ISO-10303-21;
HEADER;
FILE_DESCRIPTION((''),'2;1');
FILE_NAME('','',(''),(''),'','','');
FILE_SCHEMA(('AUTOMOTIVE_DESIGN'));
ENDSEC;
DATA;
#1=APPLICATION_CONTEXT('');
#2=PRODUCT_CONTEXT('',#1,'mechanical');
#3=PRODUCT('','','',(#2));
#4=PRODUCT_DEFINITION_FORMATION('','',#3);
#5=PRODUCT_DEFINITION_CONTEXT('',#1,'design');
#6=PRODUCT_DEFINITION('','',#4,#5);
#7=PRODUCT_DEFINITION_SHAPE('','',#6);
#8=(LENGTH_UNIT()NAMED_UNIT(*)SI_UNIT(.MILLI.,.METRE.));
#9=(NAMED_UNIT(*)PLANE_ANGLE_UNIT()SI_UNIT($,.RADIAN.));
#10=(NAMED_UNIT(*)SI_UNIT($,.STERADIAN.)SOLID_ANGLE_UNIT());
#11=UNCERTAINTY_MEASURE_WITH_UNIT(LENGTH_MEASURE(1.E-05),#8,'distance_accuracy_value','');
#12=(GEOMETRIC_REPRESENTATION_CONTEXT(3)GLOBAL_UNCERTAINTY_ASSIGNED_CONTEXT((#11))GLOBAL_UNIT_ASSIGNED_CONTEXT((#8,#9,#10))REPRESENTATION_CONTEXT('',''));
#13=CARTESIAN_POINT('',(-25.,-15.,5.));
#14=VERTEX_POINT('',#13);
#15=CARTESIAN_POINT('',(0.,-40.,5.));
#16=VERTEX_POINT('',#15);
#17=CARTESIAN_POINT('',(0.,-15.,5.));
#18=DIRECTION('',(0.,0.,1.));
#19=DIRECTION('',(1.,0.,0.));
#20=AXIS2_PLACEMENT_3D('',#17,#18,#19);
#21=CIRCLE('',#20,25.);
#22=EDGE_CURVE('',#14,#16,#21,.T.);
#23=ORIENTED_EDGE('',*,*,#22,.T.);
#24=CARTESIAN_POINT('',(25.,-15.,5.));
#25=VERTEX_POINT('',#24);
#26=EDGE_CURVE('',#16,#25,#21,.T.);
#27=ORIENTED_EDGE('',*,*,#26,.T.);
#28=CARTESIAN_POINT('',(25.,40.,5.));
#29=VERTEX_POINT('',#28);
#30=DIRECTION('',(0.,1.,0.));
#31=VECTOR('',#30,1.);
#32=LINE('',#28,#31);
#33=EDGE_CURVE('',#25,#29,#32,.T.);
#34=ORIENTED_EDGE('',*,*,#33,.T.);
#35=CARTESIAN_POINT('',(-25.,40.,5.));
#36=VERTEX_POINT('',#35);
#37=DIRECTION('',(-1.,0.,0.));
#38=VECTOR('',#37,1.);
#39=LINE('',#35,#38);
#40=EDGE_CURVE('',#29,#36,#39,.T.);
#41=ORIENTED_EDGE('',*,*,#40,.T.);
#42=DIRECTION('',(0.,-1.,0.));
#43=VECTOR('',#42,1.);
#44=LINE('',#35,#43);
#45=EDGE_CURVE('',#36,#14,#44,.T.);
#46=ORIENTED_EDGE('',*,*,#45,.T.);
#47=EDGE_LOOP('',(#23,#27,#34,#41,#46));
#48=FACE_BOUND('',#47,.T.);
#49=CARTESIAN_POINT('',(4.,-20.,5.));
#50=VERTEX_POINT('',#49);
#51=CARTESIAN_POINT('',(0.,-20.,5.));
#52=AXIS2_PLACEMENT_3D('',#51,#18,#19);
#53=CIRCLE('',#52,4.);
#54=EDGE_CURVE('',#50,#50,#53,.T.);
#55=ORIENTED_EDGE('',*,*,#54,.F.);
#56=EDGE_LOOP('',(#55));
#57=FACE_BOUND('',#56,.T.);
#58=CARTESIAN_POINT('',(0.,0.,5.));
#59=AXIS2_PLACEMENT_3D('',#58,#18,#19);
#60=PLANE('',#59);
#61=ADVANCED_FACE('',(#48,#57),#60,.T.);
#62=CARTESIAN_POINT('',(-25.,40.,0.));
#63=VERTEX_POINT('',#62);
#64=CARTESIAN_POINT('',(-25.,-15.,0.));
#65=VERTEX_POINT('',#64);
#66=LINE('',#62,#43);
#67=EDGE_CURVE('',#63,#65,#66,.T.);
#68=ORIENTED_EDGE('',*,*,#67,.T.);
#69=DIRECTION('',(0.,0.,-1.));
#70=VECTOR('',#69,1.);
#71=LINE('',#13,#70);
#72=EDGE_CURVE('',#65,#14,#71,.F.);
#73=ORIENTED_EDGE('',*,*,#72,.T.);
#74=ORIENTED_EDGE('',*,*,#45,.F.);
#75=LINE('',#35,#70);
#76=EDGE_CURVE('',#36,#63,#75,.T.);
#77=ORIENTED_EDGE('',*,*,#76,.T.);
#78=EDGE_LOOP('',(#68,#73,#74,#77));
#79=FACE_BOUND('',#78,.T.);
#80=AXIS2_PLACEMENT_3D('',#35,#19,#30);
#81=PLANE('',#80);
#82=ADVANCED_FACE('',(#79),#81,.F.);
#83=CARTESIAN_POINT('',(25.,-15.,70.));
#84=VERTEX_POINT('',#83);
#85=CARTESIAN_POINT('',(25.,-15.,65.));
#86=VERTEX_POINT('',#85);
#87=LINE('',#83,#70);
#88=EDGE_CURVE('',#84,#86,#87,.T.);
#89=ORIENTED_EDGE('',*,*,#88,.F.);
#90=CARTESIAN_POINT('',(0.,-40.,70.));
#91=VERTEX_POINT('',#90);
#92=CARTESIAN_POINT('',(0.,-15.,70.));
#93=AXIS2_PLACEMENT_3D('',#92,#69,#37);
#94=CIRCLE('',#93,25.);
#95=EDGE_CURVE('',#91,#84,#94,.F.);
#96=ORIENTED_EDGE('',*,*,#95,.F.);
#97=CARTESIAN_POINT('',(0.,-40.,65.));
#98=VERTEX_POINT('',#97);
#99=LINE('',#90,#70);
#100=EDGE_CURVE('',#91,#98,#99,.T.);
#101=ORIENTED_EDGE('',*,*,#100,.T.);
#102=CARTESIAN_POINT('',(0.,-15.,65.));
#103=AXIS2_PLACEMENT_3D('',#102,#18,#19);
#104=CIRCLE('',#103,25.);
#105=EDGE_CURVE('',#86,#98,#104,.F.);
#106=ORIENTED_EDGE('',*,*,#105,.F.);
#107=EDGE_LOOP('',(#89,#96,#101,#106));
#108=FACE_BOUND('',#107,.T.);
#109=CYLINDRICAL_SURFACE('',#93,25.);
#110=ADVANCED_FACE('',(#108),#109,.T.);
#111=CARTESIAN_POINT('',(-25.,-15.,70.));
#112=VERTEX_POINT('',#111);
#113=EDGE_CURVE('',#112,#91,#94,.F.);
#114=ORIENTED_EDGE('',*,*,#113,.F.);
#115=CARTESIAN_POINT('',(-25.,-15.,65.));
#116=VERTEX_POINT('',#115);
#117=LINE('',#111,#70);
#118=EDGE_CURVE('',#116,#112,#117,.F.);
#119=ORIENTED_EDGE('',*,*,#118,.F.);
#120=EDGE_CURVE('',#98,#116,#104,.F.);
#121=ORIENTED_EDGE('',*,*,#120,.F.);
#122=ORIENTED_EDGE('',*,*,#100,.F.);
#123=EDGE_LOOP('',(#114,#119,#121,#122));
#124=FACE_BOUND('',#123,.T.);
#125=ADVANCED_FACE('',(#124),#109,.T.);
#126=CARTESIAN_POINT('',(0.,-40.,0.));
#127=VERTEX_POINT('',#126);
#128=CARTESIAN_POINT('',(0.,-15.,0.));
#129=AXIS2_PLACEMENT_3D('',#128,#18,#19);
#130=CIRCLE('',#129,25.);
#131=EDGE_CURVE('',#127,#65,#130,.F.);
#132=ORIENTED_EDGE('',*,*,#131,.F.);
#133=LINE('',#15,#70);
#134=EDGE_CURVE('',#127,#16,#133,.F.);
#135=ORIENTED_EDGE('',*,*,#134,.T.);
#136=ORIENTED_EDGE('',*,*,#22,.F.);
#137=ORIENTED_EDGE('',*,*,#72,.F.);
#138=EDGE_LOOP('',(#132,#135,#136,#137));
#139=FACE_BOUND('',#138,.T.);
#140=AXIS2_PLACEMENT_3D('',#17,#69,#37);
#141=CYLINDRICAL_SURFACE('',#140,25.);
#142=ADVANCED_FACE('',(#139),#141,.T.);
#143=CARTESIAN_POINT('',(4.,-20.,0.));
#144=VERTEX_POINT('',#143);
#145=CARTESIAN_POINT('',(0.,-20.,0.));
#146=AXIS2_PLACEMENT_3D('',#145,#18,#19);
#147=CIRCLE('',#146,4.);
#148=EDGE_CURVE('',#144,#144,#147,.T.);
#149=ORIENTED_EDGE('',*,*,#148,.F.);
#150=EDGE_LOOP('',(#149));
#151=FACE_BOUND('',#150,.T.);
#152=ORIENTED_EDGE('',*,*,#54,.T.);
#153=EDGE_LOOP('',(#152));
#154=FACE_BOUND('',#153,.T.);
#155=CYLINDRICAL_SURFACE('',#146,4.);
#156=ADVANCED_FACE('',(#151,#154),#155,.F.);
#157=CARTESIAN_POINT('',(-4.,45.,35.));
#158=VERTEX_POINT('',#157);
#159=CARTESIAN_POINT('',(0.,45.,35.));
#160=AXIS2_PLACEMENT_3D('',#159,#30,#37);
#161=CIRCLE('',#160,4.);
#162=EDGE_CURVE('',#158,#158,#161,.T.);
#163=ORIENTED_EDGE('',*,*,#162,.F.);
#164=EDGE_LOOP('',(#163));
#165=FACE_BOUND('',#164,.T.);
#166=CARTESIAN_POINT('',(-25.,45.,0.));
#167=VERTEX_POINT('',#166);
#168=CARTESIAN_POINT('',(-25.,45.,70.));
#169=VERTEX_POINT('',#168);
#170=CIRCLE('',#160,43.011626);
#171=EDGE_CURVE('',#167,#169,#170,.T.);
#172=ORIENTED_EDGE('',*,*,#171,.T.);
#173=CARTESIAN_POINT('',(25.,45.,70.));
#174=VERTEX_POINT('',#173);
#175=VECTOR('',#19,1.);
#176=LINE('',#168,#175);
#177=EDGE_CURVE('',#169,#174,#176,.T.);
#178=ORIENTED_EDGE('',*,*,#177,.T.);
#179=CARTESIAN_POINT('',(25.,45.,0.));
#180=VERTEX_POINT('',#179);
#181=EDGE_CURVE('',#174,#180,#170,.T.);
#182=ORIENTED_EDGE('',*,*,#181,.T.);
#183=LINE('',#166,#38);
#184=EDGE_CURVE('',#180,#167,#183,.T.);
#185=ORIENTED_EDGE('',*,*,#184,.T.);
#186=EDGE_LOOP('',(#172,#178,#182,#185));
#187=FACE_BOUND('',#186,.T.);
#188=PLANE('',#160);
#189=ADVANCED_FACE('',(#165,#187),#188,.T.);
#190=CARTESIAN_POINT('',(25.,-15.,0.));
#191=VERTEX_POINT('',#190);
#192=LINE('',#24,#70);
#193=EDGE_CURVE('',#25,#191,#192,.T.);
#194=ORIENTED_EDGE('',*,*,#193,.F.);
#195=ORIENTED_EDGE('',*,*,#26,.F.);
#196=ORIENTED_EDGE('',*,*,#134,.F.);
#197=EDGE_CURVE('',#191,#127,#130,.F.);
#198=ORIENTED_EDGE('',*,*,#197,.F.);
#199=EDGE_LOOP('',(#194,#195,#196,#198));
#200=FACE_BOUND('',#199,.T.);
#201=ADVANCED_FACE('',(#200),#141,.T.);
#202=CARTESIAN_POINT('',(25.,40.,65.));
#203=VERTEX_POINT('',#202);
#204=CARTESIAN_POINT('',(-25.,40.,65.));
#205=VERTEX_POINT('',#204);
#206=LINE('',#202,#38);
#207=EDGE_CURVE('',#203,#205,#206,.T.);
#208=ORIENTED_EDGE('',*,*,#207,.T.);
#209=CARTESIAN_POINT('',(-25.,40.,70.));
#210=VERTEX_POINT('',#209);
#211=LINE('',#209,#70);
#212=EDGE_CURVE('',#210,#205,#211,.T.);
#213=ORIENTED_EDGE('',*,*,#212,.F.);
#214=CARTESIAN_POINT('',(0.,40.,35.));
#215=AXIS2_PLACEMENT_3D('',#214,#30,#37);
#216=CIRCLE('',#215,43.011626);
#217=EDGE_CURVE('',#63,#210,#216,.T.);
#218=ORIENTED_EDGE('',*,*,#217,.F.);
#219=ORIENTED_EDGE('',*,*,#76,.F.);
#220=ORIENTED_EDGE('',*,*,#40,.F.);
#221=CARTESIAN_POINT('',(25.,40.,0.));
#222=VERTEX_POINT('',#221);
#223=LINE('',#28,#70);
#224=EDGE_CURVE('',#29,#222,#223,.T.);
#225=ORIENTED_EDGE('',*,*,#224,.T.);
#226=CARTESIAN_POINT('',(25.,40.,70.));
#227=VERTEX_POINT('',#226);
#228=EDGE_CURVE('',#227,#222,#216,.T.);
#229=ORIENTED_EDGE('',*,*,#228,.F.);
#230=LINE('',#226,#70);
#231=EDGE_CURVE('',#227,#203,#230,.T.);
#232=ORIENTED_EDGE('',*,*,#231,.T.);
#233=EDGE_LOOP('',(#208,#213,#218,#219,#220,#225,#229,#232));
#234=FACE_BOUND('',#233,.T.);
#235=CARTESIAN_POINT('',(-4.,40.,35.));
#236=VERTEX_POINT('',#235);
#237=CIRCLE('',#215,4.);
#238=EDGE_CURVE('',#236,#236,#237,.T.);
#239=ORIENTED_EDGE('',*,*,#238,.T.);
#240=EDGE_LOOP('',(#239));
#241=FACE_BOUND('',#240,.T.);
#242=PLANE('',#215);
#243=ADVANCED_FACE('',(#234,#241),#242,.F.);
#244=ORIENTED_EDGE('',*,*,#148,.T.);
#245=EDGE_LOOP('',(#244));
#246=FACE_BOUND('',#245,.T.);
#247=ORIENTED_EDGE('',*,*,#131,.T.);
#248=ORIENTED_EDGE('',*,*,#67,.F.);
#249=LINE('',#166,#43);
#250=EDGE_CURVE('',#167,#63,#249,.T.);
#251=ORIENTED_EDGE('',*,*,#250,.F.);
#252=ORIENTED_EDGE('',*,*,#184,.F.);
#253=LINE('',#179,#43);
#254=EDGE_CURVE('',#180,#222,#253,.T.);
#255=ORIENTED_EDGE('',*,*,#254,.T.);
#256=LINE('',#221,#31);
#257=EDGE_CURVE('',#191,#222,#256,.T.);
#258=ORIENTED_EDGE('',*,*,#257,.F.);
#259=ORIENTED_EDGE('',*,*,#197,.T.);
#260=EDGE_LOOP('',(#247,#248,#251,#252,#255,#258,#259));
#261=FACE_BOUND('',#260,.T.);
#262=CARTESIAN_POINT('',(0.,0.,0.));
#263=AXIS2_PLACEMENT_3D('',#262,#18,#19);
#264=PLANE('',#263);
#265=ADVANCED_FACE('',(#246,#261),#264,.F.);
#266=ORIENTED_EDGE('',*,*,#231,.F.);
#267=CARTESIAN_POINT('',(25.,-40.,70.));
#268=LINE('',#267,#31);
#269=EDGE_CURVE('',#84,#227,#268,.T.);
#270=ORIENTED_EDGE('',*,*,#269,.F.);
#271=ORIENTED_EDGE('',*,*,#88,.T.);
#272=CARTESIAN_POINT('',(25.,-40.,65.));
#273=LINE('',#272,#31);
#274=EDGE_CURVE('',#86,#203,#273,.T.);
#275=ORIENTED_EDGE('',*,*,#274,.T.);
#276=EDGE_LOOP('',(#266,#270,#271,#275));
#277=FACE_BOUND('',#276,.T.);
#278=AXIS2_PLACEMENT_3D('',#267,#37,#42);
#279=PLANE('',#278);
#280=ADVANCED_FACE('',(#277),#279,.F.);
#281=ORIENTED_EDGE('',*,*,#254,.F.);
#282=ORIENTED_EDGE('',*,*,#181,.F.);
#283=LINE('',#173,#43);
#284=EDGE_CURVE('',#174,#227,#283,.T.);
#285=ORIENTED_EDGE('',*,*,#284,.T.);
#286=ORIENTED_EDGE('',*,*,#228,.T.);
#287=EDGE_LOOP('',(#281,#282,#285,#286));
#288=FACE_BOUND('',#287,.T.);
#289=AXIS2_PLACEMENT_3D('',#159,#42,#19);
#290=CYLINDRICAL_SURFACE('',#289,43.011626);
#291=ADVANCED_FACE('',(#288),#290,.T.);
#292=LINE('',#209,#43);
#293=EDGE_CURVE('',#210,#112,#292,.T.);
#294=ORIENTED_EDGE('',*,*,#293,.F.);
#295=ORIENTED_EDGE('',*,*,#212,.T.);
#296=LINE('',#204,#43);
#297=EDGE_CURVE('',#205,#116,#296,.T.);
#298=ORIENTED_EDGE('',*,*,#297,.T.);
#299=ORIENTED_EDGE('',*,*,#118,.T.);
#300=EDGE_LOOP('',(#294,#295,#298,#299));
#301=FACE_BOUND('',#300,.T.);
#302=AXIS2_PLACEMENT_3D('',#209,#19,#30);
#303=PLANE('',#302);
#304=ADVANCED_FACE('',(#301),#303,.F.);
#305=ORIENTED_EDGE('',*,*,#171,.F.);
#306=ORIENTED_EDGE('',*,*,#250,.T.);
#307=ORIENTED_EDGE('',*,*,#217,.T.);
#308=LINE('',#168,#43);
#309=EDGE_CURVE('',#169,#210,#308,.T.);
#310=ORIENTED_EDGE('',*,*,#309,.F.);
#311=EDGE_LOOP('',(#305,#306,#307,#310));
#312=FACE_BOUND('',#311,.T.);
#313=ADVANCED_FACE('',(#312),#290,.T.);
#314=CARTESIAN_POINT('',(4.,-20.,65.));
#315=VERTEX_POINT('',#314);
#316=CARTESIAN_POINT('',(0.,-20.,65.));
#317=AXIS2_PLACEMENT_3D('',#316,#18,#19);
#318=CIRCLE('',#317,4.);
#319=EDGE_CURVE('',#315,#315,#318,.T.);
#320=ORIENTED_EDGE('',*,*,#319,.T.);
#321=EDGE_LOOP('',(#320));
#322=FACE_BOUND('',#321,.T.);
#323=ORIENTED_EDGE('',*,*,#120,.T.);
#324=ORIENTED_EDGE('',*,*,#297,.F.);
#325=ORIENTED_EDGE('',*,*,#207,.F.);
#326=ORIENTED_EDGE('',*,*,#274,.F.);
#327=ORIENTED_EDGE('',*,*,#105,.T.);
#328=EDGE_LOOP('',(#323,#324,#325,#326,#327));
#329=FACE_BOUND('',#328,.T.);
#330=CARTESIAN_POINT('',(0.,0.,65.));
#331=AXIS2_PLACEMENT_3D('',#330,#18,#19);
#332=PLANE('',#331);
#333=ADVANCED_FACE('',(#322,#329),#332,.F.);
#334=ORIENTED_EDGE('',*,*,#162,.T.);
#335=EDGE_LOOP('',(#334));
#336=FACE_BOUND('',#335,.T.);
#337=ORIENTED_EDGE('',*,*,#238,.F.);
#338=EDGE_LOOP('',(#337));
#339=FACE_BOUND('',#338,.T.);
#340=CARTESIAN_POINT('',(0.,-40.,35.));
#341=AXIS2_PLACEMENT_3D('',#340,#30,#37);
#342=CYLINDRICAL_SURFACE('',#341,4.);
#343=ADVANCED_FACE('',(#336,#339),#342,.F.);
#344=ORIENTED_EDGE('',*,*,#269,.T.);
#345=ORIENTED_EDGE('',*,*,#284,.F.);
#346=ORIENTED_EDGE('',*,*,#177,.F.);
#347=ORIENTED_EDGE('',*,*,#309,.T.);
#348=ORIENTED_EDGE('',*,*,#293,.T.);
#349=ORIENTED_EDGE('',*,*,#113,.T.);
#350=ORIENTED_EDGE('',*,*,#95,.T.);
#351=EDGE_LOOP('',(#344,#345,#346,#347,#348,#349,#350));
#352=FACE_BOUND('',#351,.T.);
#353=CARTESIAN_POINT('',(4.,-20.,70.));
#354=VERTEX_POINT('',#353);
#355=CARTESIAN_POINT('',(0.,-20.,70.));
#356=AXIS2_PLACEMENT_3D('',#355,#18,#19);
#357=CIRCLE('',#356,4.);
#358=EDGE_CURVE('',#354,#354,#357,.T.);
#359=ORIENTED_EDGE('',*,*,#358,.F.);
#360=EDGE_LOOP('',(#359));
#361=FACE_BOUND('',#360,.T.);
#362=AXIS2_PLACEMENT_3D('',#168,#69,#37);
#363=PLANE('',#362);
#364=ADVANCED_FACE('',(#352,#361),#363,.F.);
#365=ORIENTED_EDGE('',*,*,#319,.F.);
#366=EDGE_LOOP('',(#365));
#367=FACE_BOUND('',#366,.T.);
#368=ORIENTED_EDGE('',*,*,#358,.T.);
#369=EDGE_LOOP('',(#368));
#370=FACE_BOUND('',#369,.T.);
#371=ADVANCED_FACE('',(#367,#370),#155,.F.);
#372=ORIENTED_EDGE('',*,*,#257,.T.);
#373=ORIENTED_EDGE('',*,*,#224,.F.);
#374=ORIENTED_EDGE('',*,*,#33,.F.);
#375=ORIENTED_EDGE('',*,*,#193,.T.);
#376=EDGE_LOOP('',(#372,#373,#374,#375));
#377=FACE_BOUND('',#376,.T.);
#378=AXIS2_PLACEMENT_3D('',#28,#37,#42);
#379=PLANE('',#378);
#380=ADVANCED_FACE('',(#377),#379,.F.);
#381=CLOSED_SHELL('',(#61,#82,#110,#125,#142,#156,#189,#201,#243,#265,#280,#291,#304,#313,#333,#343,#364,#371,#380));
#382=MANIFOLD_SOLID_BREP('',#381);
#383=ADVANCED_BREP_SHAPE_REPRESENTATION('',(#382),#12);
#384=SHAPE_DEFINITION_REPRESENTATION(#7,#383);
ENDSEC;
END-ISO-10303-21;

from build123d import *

# Parameters (mm, degrees)
SKETCH_1_W          = 50
SKETCH_1_H          = 80
EXTRUDE_1_DEPTH     = 5
SKETCH_2_W          = 50
SKETCH_2_H          = 80
EXTRUDE_2_DEPTH     = 5
EXTRUDE_3_DEPTH     = 5
SKETCH_4_R          = 4
CUT_EXTRUDE_1_DEPTH = 94.674969976
SKETCH_5_R          = 4
CUT_EXTRUDE_2_DEPTH = 119.215904175
FILLET_1_R          = 25


with BuildPart() as part:
    # 草图1 → 凸台-拉伸1 (new body)
    with BuildSketch(Plane.XY):
        Rectangle(SKETCH_1_W, SKETCH_1_H)
    extrude(amount=EXTRUDE_1_DEPTH)



with BuildPart() as body_2:
    # 草图2 → 凸台-拉伸2 (new body)
    with BuildSketch(Plane.XY.offset(65)):
        Rectangle(SKETCH_2_W, SKETCH_2_H)
    extrude(amount=EXTRUDE_2_DEPTH)


with BuildPart() as part_1:
    add(part.part)

    add(body_2.part)  # 凸台-拉伸3 merges body 2
    # 草图3 → 凸台-拉伸3 (add)
    with BuildSketch(Plane(origin=(0, 40, 0), x_dir=(1, 0, 0), z_dir=(0, 1, 0))):
        with BuildLine():
            Line((-25, 0), (25, 0))
            ThreePointArc((25, 0), (43.011626335, -35), (25, -70))
            Line((25, -70), (-25, -70))
            ThreePointArc((-25, -70), (-43.011626335, -35), (-25, 0))
        make_face()
    extrude(amount=EXTRUDE_3_DEPTH)

    # 草图4 → 切除-拉伸1 (cut, through all)
    with BuildSketch(Plane.XY.offset(70)):
        with Locations((0, -20)):
            Circle(SKETCH_4_R)
    extrude(amount=-CUT_EXTRUDE_1_DEPTH, mode=Mode.SUBTRACT)

    # 草图5 → 切除-拉伸2 (cut, through all)
    with BuildSketch(Plane(origin=(0, 45, 0), x_dir=(1, 0, 0), z_dir=(0, 1, 0))):
        with Locations(Location((0, -35, 0), (0, 0, 180))):
            Circle(SKETCH_5_R)
    extrude(amount=-CUT_EXTRUDE_2_DEPTH, mode=Mode.SUBTRACT)

    # 圆角1
    fillet_1_edges = [part_1.edges().sort_by_distance(p)[0] for p in [
        (-25, -40, 2.5),
        (25, -40, 2.5),
        (25, -40, 67.5),
        (-25, -40, 67.5),
    ]]
    fillet(fillet_1_edges, radius=FILLET_1_R - 0.0001)  # a hair under: the kernel refuses the full size


solid = part_1.part
